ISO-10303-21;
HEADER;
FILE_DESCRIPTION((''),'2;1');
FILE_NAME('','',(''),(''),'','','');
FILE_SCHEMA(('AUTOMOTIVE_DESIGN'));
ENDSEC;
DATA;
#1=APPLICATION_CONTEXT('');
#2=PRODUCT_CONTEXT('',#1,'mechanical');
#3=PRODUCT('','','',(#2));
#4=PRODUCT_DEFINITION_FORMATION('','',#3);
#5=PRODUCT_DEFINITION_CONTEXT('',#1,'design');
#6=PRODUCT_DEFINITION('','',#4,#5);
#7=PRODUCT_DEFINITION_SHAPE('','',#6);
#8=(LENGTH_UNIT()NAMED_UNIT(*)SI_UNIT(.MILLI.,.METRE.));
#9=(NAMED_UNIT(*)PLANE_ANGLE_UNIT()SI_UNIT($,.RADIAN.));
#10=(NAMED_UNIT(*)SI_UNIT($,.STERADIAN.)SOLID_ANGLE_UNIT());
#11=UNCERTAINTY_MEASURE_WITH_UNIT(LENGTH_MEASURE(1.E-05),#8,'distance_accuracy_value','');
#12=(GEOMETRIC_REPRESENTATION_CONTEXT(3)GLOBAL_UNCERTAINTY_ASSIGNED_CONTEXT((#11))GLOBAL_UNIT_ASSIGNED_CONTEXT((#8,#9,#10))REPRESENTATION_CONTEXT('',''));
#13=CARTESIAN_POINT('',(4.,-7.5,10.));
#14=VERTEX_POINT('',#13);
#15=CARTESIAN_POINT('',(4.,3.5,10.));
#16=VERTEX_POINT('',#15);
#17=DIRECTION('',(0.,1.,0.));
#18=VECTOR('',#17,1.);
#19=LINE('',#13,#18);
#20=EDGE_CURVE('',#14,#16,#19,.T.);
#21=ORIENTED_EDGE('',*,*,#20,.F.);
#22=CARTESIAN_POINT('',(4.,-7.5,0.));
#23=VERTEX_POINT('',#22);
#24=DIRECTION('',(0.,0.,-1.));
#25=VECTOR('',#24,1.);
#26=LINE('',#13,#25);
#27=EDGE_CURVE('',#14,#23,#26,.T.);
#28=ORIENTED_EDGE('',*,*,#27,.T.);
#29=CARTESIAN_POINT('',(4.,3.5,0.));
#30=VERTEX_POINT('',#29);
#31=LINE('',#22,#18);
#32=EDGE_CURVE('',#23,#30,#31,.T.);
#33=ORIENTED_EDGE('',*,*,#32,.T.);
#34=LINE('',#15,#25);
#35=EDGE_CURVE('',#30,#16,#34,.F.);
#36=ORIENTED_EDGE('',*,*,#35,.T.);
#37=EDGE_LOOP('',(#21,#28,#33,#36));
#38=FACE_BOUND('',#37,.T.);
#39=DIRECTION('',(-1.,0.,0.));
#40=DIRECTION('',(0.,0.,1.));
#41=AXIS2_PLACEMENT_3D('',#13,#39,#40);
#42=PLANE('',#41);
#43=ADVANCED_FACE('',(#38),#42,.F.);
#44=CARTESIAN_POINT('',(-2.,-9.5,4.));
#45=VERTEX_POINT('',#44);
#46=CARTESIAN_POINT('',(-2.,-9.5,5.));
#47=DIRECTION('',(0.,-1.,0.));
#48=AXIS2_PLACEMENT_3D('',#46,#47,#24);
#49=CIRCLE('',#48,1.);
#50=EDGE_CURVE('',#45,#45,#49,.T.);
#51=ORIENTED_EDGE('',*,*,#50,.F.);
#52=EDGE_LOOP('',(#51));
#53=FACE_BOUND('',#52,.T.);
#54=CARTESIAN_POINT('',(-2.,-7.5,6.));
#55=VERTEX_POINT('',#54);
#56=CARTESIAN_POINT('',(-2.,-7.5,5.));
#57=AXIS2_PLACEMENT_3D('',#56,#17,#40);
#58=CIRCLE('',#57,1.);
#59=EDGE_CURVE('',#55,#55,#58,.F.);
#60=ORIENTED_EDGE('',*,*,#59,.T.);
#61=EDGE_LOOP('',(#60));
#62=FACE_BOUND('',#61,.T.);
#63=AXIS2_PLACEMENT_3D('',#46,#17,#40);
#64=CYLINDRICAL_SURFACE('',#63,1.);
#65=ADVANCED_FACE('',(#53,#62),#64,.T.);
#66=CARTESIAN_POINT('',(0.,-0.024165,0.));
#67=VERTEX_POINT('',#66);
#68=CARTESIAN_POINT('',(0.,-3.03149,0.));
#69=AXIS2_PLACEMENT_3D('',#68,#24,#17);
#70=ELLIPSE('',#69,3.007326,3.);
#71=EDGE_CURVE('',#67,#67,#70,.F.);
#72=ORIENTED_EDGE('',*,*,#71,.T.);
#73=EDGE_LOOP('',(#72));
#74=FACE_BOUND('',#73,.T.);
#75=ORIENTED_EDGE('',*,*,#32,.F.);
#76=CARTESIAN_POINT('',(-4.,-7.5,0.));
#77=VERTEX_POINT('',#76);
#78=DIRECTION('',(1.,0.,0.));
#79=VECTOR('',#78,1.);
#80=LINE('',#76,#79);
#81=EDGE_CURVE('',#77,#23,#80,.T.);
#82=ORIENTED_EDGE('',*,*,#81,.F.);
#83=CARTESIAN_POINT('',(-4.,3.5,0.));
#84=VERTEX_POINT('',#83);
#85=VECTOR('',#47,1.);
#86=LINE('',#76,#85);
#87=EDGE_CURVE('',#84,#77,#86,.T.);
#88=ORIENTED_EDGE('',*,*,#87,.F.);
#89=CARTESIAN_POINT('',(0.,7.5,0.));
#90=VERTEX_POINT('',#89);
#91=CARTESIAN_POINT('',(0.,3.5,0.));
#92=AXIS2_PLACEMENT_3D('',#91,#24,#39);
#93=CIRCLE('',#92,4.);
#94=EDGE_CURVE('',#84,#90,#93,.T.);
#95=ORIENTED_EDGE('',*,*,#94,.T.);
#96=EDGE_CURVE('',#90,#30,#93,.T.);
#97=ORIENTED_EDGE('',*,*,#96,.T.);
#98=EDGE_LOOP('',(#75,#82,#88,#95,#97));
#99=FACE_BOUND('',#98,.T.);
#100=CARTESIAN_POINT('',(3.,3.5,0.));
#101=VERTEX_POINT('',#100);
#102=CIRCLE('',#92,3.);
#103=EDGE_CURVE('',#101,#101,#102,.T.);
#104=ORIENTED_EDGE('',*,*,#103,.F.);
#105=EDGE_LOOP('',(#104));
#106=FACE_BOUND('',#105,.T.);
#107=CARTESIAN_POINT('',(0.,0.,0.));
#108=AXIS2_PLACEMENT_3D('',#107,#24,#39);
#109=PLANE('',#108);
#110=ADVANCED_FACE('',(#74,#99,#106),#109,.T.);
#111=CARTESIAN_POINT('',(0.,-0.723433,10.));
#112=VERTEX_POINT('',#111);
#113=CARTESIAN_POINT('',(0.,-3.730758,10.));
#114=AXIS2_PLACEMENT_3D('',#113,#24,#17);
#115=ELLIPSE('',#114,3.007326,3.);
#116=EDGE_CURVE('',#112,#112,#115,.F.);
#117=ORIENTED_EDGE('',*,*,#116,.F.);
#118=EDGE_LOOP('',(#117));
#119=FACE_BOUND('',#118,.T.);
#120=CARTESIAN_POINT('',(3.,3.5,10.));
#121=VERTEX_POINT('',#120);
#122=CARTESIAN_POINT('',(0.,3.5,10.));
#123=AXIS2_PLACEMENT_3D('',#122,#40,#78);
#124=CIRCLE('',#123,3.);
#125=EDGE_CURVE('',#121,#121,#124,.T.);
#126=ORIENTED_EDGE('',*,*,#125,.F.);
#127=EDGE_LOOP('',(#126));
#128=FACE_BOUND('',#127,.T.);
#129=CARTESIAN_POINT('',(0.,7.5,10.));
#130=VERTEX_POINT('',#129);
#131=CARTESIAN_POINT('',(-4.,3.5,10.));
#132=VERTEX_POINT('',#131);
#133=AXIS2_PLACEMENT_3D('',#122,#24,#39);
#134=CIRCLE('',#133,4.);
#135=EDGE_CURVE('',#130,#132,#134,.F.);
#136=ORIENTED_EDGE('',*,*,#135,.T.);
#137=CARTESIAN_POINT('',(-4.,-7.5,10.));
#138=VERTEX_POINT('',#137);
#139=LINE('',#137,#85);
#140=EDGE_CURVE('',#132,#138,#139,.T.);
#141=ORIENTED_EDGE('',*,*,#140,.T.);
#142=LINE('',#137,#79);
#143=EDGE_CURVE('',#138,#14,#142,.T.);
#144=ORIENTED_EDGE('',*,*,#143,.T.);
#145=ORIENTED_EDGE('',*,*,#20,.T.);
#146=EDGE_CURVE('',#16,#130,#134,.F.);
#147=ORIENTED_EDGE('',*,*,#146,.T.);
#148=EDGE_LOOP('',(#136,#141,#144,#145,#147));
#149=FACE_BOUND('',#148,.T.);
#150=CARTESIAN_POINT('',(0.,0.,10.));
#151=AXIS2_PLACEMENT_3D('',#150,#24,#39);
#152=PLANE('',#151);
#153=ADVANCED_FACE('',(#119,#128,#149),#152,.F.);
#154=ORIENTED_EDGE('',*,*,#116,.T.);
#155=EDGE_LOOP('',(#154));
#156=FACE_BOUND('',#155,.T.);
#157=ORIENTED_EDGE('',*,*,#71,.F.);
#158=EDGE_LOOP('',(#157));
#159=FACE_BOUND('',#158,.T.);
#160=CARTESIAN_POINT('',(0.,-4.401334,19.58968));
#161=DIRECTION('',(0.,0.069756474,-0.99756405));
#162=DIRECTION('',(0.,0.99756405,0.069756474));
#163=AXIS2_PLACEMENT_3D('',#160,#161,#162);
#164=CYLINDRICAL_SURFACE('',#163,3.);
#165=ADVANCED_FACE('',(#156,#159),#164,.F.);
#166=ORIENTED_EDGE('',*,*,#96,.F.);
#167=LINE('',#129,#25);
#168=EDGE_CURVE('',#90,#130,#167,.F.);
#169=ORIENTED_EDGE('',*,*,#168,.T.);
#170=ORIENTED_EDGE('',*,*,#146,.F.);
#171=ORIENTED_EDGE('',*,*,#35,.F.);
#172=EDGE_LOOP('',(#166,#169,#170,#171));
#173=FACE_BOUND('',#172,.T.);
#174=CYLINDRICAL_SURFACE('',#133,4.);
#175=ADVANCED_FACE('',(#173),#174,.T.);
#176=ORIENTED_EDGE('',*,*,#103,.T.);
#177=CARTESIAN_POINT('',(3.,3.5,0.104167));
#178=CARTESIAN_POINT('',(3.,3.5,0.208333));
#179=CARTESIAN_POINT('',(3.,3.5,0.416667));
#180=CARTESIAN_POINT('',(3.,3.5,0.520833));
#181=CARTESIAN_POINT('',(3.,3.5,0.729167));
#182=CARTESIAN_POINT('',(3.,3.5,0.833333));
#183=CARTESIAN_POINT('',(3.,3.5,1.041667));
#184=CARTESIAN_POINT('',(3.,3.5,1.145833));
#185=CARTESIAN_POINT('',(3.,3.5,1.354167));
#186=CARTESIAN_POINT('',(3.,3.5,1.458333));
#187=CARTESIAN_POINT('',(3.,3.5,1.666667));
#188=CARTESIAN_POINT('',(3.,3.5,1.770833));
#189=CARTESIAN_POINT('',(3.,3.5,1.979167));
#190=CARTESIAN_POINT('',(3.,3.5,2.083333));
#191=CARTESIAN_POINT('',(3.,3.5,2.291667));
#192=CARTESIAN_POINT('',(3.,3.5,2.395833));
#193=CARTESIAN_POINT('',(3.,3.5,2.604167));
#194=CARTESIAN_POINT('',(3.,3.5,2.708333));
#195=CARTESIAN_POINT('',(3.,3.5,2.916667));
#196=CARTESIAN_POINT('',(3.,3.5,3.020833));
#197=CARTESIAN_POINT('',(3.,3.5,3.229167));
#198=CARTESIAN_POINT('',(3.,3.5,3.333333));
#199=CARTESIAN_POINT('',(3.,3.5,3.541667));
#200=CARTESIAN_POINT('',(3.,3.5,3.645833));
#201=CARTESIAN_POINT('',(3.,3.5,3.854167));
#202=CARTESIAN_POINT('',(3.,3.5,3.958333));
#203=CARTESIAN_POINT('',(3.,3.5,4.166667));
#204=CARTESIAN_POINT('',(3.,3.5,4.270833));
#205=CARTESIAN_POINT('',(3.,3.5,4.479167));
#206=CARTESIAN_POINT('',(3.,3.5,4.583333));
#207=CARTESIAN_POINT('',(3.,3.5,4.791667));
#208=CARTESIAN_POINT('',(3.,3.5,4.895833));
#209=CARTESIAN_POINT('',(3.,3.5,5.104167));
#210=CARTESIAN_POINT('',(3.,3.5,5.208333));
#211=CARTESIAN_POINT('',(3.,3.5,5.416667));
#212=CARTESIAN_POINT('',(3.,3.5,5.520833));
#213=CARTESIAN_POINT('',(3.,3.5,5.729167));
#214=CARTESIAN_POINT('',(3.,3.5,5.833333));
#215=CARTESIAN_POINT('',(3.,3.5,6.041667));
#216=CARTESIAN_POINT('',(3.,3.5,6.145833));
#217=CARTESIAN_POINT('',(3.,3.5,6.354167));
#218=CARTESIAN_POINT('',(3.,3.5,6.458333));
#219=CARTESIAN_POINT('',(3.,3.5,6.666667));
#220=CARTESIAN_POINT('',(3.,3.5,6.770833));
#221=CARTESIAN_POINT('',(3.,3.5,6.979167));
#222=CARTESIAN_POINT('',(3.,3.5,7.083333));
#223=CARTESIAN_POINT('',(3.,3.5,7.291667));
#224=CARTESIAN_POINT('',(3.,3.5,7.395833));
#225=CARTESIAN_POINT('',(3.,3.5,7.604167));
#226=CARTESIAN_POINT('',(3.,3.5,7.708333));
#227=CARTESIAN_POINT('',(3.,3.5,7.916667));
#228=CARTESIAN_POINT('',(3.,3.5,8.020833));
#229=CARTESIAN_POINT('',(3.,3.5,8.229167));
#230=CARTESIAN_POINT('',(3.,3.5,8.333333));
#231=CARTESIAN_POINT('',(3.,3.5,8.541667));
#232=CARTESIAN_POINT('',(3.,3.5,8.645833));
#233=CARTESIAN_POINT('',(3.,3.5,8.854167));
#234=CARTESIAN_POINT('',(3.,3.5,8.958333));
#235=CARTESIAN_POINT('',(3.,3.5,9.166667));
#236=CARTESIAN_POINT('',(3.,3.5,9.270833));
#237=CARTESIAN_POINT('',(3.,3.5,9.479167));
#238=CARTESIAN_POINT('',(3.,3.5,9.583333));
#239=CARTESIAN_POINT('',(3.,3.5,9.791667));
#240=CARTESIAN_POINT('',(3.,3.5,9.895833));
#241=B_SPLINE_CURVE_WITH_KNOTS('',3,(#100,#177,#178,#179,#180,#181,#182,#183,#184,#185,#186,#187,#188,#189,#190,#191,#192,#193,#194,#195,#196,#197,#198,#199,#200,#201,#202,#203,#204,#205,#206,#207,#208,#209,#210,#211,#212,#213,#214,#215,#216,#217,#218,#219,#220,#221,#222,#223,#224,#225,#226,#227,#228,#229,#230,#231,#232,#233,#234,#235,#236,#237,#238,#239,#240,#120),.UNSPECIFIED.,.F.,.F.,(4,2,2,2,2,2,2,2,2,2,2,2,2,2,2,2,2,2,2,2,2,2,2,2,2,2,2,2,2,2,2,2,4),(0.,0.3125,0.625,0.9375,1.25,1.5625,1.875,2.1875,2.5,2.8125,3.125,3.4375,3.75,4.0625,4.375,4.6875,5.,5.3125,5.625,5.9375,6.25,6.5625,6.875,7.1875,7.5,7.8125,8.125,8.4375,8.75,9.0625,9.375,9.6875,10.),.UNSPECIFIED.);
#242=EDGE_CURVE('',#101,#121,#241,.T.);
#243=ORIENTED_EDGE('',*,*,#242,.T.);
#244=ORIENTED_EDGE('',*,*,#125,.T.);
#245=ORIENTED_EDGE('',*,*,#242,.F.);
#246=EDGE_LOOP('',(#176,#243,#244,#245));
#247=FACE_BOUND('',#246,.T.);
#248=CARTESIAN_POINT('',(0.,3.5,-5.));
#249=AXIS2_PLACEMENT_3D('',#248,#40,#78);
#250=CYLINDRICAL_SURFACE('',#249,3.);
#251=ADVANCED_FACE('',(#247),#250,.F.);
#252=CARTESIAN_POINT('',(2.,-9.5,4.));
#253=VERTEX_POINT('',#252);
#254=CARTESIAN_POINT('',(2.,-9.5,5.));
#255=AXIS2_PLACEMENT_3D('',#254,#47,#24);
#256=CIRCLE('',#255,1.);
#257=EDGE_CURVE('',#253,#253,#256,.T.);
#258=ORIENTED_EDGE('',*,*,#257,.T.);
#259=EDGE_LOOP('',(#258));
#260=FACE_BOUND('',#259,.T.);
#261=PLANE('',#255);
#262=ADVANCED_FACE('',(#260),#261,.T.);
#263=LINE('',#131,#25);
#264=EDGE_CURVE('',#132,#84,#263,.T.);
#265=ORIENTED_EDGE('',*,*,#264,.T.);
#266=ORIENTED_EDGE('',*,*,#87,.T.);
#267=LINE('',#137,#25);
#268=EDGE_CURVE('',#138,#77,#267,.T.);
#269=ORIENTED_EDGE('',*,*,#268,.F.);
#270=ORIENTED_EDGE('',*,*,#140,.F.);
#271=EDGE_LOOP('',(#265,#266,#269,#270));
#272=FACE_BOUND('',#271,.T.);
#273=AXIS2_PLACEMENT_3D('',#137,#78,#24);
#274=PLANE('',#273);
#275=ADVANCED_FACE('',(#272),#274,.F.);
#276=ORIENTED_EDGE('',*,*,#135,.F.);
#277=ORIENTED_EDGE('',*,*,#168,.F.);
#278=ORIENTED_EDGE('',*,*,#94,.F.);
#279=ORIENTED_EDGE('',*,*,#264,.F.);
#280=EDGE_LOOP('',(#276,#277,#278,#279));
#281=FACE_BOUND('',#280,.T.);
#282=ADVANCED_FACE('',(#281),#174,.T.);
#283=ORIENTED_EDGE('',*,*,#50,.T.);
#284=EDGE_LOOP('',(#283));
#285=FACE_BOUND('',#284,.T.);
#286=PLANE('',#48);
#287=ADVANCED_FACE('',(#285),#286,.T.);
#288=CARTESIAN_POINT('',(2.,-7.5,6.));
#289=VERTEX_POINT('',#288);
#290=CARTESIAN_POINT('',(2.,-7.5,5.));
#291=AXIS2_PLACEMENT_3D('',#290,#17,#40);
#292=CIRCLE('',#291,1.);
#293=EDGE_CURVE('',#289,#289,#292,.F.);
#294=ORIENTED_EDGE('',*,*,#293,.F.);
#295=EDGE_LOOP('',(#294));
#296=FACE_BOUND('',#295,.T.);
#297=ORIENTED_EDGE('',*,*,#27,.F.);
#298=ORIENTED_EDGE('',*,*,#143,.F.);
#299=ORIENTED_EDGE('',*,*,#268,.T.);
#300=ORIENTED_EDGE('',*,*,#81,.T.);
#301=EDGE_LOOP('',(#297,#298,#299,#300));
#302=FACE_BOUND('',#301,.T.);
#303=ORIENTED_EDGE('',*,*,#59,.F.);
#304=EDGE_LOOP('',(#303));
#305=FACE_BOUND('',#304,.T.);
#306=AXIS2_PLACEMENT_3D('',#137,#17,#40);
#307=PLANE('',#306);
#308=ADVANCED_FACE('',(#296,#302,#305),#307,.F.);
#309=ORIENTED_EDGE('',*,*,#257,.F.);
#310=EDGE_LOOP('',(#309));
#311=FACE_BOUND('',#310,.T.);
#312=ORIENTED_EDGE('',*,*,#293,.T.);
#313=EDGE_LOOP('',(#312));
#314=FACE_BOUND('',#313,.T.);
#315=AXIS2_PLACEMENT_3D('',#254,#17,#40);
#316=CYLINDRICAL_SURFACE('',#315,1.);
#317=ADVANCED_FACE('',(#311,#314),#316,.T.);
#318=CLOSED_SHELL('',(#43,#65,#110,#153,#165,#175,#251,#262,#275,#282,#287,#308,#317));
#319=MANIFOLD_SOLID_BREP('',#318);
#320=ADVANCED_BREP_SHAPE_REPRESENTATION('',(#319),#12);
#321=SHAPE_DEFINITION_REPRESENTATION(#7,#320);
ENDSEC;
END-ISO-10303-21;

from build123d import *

# Parameters (mm, degrees)
SZKIC1_W                    = 8
SZKIC1_H                    = 15
DODANIE_WYCI_GNI_CIE1_DEPTH = 10
ZAOKR_GLENIE1_R             = 4
SZKIC2_R                    = 1
DODANIE_WYCI_GNI_CIE2_DEPTH = 2
SZKIC4_R                    = 3
WYTNIJ_WYCI_GNI_CIE1_DEPTH  = 15
SZKIC9_R                    = 3
WYTNIJ_WYCI_GNI_CIE2_DEPTH  = 25


with BuildPart() as part:
    # Szkic1 → Dodanie-wyciągnięcie1 (new body)
    with BuildSketch(Plane.XY):
        Rectangle(SZKIC1_W, SZKIC1_H)
    extrude(amount=DODANIE_WYCI_GNI_CIE1_DEPTH)

    # Zaokrąglenie1
    zaokr_glenie1_edges = [part.edges().sort_by_distance(p)[0] for p in [
        (4, 7.5, 5),
        (-4, 7.5, 5),
    ]]
    fillet(zaokr_glenie1_edges, radius=ZAOKR_GLENIE1_R - 0.0001)  # a hair under: the kernel refuses the full size

    # Szkic2 → Dodanie-wyciągnięcie2 (add)
    with BuildSketch(Plane.XZ.offset(7.5)):
        with Locations(Location((-2, 5, 0), (0, 0, 90))):
            Circle(SZKIC2_R)
        with Locations(Location((2, 5, 0), (0, 0, 90))):
            Circle(SZKIC2_R)
    extrude(amount=DODANIE_WYCI_GNI_CIE2_DEPTH)

    # Szkic4 → Wytnij-wyciągnięcie1 (cut)
    with BuildSketch(Plane.XY.offset(10)):
        with Locations((0, 3.5)):
            Circle(SZKIC4_R)
    extrude(amount=-WYTNIJ_WYCI_GNI_CIE1_DEPTH, mode=Mode.SUBTRACT)

    # Szkic9 → Wytnij-wyciągnięcie2 (cut)
    with BuildSketch(Plane(origin=(0, -2.657422367, -5.349421519), x_dir=(1, 0, 0), z_dir=(0, -0.06975647374412577, 0.9975640502598243))):
        with Locations(Location((0, 0, 0), (0, 0, 90))):
            Circle(SZKIC9_R)
    extrude(amount=WYTNIJ_WYCI_GNI_CIE2_DEPTH, mode=Mode.SUBTRACT)


solid = part.part
